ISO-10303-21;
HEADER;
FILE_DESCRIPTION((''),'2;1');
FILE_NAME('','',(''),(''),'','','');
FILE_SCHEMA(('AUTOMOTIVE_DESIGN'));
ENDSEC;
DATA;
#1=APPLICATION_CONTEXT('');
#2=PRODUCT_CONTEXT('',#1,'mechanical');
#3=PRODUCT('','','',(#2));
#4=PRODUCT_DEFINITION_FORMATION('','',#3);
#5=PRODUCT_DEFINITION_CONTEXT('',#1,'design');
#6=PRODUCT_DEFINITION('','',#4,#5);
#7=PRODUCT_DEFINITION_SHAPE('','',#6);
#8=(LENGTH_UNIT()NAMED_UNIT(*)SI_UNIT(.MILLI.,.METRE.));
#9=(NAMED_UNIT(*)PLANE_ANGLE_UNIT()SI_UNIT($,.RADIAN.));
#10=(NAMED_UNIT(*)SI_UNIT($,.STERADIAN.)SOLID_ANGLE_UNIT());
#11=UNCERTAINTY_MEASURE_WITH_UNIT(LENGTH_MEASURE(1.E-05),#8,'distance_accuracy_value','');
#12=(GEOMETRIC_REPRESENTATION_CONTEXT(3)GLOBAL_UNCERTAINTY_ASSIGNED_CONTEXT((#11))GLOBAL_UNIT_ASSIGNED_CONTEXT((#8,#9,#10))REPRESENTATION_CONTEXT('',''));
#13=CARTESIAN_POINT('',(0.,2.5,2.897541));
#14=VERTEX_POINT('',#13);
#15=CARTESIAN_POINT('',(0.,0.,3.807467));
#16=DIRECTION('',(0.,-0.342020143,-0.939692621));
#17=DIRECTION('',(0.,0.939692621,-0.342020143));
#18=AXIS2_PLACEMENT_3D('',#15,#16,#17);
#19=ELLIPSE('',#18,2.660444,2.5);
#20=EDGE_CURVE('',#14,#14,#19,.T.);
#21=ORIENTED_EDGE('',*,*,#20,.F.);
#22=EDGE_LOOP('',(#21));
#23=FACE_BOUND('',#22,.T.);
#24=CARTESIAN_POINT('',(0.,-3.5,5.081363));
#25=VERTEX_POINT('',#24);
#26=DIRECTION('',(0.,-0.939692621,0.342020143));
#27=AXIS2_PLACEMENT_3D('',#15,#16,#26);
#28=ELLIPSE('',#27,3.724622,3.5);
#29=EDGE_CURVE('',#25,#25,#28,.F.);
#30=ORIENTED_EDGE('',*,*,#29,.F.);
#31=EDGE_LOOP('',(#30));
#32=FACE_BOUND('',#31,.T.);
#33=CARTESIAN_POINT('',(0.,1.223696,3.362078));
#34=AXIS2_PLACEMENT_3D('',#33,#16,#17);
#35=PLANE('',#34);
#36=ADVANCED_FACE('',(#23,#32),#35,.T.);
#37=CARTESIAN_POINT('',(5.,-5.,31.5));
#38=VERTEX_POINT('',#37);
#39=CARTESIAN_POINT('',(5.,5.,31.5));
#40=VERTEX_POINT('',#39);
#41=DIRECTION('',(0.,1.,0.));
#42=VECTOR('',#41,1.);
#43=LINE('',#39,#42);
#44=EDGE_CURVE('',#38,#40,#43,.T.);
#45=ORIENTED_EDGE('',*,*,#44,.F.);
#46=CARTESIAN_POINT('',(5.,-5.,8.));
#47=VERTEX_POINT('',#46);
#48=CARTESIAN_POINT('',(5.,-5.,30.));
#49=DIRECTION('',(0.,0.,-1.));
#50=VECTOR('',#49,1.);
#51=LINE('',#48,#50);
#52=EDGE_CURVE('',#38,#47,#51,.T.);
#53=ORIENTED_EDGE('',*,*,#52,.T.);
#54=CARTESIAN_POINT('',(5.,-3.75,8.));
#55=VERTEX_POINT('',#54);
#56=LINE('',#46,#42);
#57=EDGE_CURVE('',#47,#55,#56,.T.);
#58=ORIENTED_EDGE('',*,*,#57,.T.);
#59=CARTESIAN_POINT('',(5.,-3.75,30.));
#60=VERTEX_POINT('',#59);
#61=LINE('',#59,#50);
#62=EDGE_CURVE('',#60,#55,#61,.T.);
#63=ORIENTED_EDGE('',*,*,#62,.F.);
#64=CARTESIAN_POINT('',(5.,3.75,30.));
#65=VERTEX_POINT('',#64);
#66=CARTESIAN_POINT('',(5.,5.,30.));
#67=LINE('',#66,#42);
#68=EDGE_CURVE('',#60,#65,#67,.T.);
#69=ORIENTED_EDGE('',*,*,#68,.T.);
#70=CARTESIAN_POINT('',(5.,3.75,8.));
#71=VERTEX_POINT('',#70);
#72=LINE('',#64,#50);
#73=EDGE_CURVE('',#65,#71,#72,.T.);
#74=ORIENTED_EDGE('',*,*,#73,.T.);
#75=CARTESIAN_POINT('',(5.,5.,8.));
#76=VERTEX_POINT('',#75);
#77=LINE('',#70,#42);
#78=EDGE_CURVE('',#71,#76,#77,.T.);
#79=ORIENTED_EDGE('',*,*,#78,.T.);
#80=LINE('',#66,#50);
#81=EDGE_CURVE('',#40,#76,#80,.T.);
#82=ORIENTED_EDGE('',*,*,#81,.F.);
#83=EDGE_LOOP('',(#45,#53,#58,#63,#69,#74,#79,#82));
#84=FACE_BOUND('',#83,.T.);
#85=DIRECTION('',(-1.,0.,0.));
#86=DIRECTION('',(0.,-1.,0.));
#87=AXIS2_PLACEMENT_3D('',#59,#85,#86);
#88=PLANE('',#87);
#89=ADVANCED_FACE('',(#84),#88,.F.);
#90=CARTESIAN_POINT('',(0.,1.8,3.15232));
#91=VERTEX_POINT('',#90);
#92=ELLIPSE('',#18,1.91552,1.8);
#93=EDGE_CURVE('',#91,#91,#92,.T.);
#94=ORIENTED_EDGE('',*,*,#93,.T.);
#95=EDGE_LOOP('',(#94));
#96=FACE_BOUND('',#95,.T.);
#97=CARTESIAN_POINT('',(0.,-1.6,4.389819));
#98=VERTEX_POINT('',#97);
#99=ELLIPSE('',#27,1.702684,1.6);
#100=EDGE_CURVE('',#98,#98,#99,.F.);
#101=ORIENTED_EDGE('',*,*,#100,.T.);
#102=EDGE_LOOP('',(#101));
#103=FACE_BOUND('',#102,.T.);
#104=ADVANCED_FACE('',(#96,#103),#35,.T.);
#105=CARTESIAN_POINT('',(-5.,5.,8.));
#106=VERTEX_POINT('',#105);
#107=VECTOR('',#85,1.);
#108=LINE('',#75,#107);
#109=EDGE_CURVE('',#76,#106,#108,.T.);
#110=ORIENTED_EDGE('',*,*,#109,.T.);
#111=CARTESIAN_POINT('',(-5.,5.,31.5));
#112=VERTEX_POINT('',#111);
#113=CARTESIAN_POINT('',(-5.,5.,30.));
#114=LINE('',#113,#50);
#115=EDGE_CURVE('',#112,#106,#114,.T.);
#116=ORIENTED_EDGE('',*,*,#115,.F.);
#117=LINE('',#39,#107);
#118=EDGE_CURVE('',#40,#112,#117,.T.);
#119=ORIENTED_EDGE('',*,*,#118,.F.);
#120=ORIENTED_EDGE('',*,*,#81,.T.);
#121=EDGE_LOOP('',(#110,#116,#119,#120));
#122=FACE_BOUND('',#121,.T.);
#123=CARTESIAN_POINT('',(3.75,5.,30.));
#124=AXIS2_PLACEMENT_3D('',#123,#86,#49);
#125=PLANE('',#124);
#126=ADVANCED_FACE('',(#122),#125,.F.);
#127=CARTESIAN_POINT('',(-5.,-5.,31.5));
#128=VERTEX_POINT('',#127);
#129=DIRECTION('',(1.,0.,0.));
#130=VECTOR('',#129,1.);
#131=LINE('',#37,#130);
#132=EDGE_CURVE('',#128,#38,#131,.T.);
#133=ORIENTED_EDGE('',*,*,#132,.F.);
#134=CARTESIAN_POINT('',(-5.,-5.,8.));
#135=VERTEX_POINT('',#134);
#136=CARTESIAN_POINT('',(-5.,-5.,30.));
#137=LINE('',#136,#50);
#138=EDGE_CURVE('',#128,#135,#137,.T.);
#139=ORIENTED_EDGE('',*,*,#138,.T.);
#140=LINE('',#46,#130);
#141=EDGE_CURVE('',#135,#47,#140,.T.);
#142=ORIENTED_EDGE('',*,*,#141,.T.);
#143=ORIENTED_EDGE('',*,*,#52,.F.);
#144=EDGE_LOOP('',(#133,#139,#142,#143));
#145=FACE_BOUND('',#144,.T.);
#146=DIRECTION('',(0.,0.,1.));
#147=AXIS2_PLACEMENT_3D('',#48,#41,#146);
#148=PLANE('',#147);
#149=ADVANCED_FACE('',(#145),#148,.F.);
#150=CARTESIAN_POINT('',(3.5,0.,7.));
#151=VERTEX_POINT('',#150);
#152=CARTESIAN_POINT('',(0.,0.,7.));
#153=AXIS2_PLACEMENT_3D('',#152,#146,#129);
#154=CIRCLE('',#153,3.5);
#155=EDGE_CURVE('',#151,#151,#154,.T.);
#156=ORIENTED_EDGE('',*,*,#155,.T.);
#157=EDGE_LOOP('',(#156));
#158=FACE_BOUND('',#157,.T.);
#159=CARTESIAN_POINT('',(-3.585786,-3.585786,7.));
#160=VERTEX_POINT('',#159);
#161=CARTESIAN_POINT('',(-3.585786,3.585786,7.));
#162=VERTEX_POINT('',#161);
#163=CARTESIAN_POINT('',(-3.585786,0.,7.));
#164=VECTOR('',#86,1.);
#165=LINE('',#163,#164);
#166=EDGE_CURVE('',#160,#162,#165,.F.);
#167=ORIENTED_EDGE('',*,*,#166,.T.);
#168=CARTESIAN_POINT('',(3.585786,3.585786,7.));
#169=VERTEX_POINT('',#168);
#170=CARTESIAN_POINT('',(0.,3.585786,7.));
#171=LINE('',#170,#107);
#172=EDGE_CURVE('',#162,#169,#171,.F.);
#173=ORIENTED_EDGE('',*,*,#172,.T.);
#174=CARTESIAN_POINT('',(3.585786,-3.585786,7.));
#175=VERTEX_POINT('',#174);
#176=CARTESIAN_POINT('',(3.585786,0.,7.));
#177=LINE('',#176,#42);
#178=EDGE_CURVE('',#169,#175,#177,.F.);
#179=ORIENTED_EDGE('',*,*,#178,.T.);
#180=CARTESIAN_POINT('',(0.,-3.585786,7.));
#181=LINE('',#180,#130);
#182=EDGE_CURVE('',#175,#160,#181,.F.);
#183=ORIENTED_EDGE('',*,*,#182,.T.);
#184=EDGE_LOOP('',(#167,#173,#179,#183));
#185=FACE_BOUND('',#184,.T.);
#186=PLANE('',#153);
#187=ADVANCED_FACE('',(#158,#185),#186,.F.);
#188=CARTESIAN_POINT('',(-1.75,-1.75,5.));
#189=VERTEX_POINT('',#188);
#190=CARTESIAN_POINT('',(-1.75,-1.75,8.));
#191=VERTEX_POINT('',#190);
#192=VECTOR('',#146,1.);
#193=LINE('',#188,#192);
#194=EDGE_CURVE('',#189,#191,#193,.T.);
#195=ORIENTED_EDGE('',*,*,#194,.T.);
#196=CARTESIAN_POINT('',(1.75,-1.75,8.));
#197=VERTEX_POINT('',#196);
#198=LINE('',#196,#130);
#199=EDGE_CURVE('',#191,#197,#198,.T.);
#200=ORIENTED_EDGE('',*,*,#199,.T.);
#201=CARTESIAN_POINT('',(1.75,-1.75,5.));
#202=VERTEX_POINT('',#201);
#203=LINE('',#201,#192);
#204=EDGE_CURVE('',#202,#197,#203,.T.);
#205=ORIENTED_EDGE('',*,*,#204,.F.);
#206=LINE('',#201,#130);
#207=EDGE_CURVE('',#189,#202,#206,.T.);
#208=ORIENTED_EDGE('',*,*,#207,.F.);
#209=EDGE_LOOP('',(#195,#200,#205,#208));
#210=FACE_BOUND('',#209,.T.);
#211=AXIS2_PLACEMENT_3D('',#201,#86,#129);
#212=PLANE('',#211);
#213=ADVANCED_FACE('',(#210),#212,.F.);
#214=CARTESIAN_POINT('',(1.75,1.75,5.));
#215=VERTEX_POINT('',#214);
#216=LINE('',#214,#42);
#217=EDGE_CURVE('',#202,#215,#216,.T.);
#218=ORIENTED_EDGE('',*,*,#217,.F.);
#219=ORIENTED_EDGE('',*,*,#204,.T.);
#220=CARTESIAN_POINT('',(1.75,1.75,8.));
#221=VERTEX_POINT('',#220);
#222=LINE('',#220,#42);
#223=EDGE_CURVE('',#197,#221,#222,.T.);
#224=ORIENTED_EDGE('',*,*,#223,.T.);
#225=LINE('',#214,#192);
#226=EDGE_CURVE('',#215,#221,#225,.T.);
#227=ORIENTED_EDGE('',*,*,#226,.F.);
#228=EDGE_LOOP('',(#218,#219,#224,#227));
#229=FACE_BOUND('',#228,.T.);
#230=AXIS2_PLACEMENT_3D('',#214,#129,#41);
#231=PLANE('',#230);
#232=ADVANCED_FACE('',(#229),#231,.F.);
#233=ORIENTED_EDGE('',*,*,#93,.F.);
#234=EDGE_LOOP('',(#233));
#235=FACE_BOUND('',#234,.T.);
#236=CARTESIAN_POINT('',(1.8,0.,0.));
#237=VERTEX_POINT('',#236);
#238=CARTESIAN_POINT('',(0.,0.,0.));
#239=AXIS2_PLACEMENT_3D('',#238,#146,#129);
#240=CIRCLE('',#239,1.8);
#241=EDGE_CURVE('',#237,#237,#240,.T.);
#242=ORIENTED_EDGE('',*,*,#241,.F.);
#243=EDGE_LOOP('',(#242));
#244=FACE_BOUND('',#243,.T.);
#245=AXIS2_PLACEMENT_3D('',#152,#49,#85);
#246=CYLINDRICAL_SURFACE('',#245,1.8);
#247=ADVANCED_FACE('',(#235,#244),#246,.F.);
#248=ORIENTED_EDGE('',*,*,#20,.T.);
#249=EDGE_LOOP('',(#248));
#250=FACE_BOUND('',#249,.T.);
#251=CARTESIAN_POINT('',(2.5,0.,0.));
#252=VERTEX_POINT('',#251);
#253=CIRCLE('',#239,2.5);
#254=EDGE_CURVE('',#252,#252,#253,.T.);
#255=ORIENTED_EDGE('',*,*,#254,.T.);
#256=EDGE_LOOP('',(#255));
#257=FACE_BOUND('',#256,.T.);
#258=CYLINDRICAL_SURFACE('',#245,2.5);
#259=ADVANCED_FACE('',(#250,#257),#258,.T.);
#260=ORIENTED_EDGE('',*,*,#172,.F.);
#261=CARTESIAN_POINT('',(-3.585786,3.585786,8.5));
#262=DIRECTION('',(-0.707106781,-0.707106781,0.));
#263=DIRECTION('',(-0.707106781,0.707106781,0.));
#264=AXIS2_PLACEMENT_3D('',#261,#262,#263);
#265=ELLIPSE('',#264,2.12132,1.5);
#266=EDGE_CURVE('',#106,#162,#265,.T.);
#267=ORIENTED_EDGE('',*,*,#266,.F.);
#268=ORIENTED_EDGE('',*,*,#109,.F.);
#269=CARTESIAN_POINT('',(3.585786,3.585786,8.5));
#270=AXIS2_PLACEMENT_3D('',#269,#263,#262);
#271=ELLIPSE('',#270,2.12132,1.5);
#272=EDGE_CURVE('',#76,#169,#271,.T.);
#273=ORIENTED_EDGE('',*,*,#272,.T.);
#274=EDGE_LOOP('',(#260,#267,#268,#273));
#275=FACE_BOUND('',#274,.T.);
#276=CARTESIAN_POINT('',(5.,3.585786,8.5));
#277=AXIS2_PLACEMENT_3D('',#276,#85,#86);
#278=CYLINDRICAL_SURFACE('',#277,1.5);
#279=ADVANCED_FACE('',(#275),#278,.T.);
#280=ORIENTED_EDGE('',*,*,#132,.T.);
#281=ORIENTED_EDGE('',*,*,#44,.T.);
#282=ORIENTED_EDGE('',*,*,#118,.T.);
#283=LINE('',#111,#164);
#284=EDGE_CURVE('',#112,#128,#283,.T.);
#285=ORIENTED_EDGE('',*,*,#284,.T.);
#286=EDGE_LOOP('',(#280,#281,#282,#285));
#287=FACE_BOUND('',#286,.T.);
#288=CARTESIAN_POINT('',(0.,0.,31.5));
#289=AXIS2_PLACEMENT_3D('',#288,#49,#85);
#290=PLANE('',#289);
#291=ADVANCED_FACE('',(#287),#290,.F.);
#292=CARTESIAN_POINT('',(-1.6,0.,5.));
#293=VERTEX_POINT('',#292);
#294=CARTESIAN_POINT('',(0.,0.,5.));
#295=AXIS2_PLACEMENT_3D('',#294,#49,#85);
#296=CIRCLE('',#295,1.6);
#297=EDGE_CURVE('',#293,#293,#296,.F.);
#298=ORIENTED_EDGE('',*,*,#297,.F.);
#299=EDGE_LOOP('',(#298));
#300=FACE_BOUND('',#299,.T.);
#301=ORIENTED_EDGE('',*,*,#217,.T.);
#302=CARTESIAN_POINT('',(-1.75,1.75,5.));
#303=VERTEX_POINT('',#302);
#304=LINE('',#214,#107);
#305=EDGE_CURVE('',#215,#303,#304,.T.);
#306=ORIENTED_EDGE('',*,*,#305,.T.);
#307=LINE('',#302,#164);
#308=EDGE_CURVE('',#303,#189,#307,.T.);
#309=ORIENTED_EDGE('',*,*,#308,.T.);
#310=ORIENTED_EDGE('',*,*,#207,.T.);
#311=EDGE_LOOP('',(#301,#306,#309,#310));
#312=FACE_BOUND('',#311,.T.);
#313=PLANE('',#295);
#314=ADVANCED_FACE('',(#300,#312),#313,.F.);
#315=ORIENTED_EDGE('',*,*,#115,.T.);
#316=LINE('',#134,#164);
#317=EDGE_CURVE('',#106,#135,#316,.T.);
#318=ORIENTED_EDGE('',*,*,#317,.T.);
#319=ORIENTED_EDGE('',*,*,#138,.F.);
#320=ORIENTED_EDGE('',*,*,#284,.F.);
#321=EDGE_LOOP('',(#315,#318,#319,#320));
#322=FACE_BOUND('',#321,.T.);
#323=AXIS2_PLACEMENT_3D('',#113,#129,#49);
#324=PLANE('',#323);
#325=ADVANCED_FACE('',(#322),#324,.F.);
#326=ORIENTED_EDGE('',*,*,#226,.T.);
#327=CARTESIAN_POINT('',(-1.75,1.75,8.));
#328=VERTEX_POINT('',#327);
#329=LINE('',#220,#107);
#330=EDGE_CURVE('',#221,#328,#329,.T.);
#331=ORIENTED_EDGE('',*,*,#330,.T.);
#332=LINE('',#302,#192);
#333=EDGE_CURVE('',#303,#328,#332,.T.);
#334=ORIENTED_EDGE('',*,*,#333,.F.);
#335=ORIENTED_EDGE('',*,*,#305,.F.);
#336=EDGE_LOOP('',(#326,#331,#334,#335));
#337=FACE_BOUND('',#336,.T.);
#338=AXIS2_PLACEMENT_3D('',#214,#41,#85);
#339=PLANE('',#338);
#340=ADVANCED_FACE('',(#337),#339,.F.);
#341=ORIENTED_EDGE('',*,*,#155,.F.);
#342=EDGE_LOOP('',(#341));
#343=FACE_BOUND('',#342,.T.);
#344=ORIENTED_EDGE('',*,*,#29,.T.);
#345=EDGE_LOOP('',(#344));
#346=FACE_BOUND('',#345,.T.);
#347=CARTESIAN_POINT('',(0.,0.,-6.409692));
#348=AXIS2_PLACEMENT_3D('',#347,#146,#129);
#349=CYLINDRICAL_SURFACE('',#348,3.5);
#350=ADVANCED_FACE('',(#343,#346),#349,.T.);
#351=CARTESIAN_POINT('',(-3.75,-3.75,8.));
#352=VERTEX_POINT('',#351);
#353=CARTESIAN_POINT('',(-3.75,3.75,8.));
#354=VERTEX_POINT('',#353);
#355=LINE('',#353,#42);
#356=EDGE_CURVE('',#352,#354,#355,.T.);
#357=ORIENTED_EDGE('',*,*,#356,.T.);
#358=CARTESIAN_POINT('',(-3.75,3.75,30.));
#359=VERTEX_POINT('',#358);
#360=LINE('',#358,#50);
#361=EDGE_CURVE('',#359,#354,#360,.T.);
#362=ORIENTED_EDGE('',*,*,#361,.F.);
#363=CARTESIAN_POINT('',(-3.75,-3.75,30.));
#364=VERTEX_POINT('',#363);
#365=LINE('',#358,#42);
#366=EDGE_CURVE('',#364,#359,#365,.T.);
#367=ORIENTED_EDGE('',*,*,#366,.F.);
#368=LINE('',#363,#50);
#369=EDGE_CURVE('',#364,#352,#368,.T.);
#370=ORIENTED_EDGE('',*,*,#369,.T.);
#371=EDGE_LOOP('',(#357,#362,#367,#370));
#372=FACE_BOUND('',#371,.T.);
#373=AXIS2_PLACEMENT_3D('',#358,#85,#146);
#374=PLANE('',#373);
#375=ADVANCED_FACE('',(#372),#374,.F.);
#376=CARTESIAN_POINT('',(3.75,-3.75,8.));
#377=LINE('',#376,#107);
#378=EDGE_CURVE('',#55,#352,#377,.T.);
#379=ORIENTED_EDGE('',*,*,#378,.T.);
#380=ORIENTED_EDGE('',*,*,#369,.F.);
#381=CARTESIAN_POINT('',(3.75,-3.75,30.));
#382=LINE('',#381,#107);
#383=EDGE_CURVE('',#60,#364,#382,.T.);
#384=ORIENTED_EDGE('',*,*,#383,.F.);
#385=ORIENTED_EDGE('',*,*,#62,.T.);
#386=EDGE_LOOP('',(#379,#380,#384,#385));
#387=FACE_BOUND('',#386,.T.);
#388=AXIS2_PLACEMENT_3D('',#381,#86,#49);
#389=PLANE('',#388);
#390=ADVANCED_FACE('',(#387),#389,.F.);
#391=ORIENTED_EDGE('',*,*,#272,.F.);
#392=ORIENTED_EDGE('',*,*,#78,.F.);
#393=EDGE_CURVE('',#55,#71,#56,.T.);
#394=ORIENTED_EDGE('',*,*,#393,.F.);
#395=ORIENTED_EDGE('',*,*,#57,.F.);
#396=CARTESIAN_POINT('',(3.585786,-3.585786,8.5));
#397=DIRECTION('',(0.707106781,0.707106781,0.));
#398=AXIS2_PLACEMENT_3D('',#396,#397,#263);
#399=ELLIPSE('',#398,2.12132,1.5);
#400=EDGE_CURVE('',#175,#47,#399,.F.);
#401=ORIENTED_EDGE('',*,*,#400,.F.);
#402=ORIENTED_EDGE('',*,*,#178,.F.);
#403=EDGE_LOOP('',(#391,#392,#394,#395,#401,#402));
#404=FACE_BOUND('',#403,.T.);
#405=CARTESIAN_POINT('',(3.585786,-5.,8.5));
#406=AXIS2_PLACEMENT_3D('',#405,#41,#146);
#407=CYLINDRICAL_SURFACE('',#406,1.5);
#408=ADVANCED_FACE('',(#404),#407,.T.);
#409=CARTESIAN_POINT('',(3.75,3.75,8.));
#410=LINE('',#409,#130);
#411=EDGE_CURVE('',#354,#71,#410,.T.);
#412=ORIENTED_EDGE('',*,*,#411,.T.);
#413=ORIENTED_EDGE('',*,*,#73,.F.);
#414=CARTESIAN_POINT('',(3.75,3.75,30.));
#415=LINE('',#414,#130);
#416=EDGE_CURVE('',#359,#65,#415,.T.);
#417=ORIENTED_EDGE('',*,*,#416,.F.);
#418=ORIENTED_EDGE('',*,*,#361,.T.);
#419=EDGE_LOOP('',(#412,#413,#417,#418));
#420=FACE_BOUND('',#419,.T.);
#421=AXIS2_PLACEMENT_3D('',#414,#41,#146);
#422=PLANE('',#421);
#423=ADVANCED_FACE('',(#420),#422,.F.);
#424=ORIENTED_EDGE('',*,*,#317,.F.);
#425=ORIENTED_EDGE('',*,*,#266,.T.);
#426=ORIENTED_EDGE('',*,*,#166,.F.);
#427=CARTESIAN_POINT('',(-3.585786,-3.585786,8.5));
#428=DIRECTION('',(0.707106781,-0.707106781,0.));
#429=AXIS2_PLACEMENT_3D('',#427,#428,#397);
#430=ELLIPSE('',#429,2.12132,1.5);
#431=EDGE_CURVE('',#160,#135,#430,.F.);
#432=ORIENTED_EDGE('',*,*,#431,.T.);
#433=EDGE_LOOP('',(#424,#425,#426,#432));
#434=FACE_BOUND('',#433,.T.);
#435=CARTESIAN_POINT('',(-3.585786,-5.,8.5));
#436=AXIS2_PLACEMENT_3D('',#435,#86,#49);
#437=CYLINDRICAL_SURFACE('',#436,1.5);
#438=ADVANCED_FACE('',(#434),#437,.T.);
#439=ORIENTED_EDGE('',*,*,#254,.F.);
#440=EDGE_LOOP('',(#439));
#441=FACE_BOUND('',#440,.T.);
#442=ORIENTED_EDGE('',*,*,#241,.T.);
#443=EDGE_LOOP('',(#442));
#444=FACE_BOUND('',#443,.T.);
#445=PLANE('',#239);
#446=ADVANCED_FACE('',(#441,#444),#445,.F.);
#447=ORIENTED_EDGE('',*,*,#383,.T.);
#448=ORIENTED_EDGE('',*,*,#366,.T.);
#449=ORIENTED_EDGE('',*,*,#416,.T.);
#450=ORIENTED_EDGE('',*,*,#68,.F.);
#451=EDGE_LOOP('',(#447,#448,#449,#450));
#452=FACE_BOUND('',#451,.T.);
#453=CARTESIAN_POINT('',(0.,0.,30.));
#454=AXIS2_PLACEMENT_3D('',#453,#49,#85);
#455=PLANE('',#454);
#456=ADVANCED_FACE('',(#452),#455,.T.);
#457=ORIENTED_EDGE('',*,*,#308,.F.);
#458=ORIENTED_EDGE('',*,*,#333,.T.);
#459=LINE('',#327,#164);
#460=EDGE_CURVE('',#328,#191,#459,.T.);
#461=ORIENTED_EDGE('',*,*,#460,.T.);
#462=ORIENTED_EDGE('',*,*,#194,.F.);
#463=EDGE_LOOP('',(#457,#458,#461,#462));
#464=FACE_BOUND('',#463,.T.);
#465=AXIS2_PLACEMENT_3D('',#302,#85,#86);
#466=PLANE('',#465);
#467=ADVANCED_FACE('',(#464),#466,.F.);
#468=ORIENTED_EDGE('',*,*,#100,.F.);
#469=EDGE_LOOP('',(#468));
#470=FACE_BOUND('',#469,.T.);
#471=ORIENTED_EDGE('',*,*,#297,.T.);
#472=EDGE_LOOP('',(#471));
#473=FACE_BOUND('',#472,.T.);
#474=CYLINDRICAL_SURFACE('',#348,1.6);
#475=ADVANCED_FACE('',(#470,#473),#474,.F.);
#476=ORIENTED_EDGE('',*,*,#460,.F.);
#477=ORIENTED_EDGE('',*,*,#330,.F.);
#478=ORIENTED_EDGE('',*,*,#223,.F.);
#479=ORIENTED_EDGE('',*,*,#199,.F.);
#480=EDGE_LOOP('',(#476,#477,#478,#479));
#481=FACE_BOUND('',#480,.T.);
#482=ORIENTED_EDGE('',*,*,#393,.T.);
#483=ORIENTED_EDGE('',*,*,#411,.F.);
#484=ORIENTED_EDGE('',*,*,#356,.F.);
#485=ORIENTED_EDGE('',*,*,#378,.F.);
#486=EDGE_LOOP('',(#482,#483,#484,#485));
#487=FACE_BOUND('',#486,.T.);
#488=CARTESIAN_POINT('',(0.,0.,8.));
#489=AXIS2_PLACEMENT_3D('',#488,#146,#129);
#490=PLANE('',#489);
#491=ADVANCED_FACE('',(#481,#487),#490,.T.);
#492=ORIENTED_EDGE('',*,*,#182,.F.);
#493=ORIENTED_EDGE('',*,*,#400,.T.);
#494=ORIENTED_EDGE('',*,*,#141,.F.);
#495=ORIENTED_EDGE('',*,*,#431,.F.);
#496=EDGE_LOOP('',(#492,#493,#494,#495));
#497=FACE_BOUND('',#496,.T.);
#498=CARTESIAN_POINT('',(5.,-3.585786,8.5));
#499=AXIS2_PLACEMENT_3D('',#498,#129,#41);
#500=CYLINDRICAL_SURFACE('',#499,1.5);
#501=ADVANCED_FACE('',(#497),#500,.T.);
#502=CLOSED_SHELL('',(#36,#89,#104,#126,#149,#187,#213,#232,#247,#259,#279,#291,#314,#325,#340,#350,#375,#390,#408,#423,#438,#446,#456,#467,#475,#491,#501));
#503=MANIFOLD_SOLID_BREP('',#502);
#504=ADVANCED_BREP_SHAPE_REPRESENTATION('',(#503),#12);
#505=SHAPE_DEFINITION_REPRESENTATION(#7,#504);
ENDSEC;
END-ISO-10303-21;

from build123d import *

# Parameters (mm, degrees)
CROQUIS1_R              = 2.5
CROQUIS1_R_2            = 1.8
SALIENTE_EXTRUIR1_DEPTH = 7
SALIENTE_EXTRUIR2_REACH = 9.842
CROQUIS3_R              = 3.5
CROQUIS3_R_2            = 1.6
CROQUIS4_W              = 10
CROQUIS4_H              = 10
SALIENTE_EXTRUIR3_DEPTH = 1
REDONDEO2_R             = 1.5
CROQUIS7_W              = 3.5
CROQUIS7_H              = 3.5
CORTAR_EXTRUIR1_DEPTH   = 3
SALIENTE_EXTRUIR4_DEPTH = 22
CROQUIS9_W              = 10
CROQUIS9_H              = 10
SALIENTE_EXTRUIR5_DEPTH = 1.5


with BuildPart() as part:
    # Croquis1 → Saliente-Extruir1 (new body)
    with BuildSketch(Plane.XY):
        Circle(CROQUIS1_R)
        Circle(CROQUIS1_R_2, mode=Mode.SUBTRACT)
    extrude(amount=SALIENTE_EXTRUIR1_DEPTH)

    # Saliente-Extruir2: up to this plane
    saliente_extruir2_end = Plane(origin=(0, 1.223696204, 3.362077689), z_dir=(0, -0.34202014332567576, -0.9396926207859059))
    # Croquis3 → Saliente-Extruir2 (add, up to the surface)
    with BuildSketch(Plane.XY.offset(7), mode=Mode.PRIVATE) as saliente_extruir2_sk1:
        Circle(CROQUIS3_R)
        Circle(CROQUIS3_R_2, mode=Mode.SUBTRACT)
    saliente_extruir2_tool1 = split(extrude(saliente_extruir2_sk1.sketch, amount=-SALIENTE_EXTRUIR2_REACH, mode=Mode.PRIVATE), bisect_by=saliente_extruir2_end, keep=Keep.BOTH, mode=Mode.PRIVATE)
    add(saliente_extruir2_tool1.solids().sort_by_distance((-3.401005, 0, 7))[0])

    # Croquis4 → Saliente-Extruir3 (add)
    with BuildSketch(Plane.XY.offset(7)):
        Rectangle(CROQUIS4_W, CROQUIS4_H)
    extrude(amount=SALIENTE_EXTRUIR3_DEPTH)

    # Redondeo2
    # the kernel refuses this fillet: 1.5 mm, written as the material it takes off along each edge
    with BuildSketch(Plane(origin=(-5, -8.535533906, 7), x_dir=(0, 0, 1), z_dir=(0, 1, 0)), Plane(origin=(8.535533906, -5, 7), x_dir=(0, 0, 1), z_dir=(-1, 0, 0)), Plane(origin=(5, 8.535533906, 7), x_dir=(0, 0, 1), z_dir=(0, -1, 0))) as redondeo2_piece_1:
        with BuildLine():
            CenterArc((1.5, 1.414213562), REDONDEO2_R, 180, 70.528779366)
            Line((0, 1.414213562), (-0.03, 1.414213562))
            Line((-0.03, 1.414213562), (-0.03, 0))
            Line((-0.03, 0), (0, -0.03))
            ThreePointArc((0, -0.03), (0.5, -0.03), (0.99, -0.028284271))
            Line((0.99, -0.028284271), (1, 0))
        make_face()
    extrude(amount=17.071067812, mode=Mode.SUBTRACT)
    with BuildSketch(Plane(origin=(-8.535533906, 5, 7), x_dir=(0, -1, 0), z_dir=(1, 0, 0))) as redondeo2_piece_2:
        with BuildLine():
            CenterArc((1.414213562, -1.5), REDONDEO2_R, 90, 70.528779366)
            Line((0, -1), (-0.028284271, -0.99))
            ThreePointArc((-0.028284271, -0.99), (-0.03, -0.5), (-0.03, 0))
            Line((-0.03, 0), (0, 0.03))
            Line((0, 0.03), (1.414213562, 0.03))
            Line((1.414213562, 0.03), (1.414213562, 0))
        make_face()
    extrude(amount=17.071067812, mode=Mode.SUBTRACT)

    # Croquis7 → Cortar-Extruir1 (cut)
    with BuildSketch(Plane.XY.offset(8)):
        Rectangle(CROQUIS7_W, CROQUIS7_H)
    extrude(amount=-CORTAR_EXTRUIR1_DEPTH, mode=Mode.SUBTRACT)

    # Croquis8 → Saliente-Extruir4 (add)
    with BuildSketch(Plane.XY.offset(8)):
        Polygon((3.75, 5), (-5, 5), (-5, -5), (3.75, -5), (5, -5), (5, -3.75), (3.75, -3.75), (-3.75, -3.75), (-3.75, 3.75), (3.75, 3.75), (5, 3.75), (5, 5), align=None)
    extrude(amount=SALIENTE_EXTRUIR4_DEPTH)

    # Croquis9 → Saliente-Extruir5 (add)
    with BuildSketch(Plane.XY.offset(30)):
        Rectangle(CROQUIS9_W, CROQUIS9_H)
    extrude(amount=SALIENTE_EXTRUIR5_DEPTH)


solid = part.part
